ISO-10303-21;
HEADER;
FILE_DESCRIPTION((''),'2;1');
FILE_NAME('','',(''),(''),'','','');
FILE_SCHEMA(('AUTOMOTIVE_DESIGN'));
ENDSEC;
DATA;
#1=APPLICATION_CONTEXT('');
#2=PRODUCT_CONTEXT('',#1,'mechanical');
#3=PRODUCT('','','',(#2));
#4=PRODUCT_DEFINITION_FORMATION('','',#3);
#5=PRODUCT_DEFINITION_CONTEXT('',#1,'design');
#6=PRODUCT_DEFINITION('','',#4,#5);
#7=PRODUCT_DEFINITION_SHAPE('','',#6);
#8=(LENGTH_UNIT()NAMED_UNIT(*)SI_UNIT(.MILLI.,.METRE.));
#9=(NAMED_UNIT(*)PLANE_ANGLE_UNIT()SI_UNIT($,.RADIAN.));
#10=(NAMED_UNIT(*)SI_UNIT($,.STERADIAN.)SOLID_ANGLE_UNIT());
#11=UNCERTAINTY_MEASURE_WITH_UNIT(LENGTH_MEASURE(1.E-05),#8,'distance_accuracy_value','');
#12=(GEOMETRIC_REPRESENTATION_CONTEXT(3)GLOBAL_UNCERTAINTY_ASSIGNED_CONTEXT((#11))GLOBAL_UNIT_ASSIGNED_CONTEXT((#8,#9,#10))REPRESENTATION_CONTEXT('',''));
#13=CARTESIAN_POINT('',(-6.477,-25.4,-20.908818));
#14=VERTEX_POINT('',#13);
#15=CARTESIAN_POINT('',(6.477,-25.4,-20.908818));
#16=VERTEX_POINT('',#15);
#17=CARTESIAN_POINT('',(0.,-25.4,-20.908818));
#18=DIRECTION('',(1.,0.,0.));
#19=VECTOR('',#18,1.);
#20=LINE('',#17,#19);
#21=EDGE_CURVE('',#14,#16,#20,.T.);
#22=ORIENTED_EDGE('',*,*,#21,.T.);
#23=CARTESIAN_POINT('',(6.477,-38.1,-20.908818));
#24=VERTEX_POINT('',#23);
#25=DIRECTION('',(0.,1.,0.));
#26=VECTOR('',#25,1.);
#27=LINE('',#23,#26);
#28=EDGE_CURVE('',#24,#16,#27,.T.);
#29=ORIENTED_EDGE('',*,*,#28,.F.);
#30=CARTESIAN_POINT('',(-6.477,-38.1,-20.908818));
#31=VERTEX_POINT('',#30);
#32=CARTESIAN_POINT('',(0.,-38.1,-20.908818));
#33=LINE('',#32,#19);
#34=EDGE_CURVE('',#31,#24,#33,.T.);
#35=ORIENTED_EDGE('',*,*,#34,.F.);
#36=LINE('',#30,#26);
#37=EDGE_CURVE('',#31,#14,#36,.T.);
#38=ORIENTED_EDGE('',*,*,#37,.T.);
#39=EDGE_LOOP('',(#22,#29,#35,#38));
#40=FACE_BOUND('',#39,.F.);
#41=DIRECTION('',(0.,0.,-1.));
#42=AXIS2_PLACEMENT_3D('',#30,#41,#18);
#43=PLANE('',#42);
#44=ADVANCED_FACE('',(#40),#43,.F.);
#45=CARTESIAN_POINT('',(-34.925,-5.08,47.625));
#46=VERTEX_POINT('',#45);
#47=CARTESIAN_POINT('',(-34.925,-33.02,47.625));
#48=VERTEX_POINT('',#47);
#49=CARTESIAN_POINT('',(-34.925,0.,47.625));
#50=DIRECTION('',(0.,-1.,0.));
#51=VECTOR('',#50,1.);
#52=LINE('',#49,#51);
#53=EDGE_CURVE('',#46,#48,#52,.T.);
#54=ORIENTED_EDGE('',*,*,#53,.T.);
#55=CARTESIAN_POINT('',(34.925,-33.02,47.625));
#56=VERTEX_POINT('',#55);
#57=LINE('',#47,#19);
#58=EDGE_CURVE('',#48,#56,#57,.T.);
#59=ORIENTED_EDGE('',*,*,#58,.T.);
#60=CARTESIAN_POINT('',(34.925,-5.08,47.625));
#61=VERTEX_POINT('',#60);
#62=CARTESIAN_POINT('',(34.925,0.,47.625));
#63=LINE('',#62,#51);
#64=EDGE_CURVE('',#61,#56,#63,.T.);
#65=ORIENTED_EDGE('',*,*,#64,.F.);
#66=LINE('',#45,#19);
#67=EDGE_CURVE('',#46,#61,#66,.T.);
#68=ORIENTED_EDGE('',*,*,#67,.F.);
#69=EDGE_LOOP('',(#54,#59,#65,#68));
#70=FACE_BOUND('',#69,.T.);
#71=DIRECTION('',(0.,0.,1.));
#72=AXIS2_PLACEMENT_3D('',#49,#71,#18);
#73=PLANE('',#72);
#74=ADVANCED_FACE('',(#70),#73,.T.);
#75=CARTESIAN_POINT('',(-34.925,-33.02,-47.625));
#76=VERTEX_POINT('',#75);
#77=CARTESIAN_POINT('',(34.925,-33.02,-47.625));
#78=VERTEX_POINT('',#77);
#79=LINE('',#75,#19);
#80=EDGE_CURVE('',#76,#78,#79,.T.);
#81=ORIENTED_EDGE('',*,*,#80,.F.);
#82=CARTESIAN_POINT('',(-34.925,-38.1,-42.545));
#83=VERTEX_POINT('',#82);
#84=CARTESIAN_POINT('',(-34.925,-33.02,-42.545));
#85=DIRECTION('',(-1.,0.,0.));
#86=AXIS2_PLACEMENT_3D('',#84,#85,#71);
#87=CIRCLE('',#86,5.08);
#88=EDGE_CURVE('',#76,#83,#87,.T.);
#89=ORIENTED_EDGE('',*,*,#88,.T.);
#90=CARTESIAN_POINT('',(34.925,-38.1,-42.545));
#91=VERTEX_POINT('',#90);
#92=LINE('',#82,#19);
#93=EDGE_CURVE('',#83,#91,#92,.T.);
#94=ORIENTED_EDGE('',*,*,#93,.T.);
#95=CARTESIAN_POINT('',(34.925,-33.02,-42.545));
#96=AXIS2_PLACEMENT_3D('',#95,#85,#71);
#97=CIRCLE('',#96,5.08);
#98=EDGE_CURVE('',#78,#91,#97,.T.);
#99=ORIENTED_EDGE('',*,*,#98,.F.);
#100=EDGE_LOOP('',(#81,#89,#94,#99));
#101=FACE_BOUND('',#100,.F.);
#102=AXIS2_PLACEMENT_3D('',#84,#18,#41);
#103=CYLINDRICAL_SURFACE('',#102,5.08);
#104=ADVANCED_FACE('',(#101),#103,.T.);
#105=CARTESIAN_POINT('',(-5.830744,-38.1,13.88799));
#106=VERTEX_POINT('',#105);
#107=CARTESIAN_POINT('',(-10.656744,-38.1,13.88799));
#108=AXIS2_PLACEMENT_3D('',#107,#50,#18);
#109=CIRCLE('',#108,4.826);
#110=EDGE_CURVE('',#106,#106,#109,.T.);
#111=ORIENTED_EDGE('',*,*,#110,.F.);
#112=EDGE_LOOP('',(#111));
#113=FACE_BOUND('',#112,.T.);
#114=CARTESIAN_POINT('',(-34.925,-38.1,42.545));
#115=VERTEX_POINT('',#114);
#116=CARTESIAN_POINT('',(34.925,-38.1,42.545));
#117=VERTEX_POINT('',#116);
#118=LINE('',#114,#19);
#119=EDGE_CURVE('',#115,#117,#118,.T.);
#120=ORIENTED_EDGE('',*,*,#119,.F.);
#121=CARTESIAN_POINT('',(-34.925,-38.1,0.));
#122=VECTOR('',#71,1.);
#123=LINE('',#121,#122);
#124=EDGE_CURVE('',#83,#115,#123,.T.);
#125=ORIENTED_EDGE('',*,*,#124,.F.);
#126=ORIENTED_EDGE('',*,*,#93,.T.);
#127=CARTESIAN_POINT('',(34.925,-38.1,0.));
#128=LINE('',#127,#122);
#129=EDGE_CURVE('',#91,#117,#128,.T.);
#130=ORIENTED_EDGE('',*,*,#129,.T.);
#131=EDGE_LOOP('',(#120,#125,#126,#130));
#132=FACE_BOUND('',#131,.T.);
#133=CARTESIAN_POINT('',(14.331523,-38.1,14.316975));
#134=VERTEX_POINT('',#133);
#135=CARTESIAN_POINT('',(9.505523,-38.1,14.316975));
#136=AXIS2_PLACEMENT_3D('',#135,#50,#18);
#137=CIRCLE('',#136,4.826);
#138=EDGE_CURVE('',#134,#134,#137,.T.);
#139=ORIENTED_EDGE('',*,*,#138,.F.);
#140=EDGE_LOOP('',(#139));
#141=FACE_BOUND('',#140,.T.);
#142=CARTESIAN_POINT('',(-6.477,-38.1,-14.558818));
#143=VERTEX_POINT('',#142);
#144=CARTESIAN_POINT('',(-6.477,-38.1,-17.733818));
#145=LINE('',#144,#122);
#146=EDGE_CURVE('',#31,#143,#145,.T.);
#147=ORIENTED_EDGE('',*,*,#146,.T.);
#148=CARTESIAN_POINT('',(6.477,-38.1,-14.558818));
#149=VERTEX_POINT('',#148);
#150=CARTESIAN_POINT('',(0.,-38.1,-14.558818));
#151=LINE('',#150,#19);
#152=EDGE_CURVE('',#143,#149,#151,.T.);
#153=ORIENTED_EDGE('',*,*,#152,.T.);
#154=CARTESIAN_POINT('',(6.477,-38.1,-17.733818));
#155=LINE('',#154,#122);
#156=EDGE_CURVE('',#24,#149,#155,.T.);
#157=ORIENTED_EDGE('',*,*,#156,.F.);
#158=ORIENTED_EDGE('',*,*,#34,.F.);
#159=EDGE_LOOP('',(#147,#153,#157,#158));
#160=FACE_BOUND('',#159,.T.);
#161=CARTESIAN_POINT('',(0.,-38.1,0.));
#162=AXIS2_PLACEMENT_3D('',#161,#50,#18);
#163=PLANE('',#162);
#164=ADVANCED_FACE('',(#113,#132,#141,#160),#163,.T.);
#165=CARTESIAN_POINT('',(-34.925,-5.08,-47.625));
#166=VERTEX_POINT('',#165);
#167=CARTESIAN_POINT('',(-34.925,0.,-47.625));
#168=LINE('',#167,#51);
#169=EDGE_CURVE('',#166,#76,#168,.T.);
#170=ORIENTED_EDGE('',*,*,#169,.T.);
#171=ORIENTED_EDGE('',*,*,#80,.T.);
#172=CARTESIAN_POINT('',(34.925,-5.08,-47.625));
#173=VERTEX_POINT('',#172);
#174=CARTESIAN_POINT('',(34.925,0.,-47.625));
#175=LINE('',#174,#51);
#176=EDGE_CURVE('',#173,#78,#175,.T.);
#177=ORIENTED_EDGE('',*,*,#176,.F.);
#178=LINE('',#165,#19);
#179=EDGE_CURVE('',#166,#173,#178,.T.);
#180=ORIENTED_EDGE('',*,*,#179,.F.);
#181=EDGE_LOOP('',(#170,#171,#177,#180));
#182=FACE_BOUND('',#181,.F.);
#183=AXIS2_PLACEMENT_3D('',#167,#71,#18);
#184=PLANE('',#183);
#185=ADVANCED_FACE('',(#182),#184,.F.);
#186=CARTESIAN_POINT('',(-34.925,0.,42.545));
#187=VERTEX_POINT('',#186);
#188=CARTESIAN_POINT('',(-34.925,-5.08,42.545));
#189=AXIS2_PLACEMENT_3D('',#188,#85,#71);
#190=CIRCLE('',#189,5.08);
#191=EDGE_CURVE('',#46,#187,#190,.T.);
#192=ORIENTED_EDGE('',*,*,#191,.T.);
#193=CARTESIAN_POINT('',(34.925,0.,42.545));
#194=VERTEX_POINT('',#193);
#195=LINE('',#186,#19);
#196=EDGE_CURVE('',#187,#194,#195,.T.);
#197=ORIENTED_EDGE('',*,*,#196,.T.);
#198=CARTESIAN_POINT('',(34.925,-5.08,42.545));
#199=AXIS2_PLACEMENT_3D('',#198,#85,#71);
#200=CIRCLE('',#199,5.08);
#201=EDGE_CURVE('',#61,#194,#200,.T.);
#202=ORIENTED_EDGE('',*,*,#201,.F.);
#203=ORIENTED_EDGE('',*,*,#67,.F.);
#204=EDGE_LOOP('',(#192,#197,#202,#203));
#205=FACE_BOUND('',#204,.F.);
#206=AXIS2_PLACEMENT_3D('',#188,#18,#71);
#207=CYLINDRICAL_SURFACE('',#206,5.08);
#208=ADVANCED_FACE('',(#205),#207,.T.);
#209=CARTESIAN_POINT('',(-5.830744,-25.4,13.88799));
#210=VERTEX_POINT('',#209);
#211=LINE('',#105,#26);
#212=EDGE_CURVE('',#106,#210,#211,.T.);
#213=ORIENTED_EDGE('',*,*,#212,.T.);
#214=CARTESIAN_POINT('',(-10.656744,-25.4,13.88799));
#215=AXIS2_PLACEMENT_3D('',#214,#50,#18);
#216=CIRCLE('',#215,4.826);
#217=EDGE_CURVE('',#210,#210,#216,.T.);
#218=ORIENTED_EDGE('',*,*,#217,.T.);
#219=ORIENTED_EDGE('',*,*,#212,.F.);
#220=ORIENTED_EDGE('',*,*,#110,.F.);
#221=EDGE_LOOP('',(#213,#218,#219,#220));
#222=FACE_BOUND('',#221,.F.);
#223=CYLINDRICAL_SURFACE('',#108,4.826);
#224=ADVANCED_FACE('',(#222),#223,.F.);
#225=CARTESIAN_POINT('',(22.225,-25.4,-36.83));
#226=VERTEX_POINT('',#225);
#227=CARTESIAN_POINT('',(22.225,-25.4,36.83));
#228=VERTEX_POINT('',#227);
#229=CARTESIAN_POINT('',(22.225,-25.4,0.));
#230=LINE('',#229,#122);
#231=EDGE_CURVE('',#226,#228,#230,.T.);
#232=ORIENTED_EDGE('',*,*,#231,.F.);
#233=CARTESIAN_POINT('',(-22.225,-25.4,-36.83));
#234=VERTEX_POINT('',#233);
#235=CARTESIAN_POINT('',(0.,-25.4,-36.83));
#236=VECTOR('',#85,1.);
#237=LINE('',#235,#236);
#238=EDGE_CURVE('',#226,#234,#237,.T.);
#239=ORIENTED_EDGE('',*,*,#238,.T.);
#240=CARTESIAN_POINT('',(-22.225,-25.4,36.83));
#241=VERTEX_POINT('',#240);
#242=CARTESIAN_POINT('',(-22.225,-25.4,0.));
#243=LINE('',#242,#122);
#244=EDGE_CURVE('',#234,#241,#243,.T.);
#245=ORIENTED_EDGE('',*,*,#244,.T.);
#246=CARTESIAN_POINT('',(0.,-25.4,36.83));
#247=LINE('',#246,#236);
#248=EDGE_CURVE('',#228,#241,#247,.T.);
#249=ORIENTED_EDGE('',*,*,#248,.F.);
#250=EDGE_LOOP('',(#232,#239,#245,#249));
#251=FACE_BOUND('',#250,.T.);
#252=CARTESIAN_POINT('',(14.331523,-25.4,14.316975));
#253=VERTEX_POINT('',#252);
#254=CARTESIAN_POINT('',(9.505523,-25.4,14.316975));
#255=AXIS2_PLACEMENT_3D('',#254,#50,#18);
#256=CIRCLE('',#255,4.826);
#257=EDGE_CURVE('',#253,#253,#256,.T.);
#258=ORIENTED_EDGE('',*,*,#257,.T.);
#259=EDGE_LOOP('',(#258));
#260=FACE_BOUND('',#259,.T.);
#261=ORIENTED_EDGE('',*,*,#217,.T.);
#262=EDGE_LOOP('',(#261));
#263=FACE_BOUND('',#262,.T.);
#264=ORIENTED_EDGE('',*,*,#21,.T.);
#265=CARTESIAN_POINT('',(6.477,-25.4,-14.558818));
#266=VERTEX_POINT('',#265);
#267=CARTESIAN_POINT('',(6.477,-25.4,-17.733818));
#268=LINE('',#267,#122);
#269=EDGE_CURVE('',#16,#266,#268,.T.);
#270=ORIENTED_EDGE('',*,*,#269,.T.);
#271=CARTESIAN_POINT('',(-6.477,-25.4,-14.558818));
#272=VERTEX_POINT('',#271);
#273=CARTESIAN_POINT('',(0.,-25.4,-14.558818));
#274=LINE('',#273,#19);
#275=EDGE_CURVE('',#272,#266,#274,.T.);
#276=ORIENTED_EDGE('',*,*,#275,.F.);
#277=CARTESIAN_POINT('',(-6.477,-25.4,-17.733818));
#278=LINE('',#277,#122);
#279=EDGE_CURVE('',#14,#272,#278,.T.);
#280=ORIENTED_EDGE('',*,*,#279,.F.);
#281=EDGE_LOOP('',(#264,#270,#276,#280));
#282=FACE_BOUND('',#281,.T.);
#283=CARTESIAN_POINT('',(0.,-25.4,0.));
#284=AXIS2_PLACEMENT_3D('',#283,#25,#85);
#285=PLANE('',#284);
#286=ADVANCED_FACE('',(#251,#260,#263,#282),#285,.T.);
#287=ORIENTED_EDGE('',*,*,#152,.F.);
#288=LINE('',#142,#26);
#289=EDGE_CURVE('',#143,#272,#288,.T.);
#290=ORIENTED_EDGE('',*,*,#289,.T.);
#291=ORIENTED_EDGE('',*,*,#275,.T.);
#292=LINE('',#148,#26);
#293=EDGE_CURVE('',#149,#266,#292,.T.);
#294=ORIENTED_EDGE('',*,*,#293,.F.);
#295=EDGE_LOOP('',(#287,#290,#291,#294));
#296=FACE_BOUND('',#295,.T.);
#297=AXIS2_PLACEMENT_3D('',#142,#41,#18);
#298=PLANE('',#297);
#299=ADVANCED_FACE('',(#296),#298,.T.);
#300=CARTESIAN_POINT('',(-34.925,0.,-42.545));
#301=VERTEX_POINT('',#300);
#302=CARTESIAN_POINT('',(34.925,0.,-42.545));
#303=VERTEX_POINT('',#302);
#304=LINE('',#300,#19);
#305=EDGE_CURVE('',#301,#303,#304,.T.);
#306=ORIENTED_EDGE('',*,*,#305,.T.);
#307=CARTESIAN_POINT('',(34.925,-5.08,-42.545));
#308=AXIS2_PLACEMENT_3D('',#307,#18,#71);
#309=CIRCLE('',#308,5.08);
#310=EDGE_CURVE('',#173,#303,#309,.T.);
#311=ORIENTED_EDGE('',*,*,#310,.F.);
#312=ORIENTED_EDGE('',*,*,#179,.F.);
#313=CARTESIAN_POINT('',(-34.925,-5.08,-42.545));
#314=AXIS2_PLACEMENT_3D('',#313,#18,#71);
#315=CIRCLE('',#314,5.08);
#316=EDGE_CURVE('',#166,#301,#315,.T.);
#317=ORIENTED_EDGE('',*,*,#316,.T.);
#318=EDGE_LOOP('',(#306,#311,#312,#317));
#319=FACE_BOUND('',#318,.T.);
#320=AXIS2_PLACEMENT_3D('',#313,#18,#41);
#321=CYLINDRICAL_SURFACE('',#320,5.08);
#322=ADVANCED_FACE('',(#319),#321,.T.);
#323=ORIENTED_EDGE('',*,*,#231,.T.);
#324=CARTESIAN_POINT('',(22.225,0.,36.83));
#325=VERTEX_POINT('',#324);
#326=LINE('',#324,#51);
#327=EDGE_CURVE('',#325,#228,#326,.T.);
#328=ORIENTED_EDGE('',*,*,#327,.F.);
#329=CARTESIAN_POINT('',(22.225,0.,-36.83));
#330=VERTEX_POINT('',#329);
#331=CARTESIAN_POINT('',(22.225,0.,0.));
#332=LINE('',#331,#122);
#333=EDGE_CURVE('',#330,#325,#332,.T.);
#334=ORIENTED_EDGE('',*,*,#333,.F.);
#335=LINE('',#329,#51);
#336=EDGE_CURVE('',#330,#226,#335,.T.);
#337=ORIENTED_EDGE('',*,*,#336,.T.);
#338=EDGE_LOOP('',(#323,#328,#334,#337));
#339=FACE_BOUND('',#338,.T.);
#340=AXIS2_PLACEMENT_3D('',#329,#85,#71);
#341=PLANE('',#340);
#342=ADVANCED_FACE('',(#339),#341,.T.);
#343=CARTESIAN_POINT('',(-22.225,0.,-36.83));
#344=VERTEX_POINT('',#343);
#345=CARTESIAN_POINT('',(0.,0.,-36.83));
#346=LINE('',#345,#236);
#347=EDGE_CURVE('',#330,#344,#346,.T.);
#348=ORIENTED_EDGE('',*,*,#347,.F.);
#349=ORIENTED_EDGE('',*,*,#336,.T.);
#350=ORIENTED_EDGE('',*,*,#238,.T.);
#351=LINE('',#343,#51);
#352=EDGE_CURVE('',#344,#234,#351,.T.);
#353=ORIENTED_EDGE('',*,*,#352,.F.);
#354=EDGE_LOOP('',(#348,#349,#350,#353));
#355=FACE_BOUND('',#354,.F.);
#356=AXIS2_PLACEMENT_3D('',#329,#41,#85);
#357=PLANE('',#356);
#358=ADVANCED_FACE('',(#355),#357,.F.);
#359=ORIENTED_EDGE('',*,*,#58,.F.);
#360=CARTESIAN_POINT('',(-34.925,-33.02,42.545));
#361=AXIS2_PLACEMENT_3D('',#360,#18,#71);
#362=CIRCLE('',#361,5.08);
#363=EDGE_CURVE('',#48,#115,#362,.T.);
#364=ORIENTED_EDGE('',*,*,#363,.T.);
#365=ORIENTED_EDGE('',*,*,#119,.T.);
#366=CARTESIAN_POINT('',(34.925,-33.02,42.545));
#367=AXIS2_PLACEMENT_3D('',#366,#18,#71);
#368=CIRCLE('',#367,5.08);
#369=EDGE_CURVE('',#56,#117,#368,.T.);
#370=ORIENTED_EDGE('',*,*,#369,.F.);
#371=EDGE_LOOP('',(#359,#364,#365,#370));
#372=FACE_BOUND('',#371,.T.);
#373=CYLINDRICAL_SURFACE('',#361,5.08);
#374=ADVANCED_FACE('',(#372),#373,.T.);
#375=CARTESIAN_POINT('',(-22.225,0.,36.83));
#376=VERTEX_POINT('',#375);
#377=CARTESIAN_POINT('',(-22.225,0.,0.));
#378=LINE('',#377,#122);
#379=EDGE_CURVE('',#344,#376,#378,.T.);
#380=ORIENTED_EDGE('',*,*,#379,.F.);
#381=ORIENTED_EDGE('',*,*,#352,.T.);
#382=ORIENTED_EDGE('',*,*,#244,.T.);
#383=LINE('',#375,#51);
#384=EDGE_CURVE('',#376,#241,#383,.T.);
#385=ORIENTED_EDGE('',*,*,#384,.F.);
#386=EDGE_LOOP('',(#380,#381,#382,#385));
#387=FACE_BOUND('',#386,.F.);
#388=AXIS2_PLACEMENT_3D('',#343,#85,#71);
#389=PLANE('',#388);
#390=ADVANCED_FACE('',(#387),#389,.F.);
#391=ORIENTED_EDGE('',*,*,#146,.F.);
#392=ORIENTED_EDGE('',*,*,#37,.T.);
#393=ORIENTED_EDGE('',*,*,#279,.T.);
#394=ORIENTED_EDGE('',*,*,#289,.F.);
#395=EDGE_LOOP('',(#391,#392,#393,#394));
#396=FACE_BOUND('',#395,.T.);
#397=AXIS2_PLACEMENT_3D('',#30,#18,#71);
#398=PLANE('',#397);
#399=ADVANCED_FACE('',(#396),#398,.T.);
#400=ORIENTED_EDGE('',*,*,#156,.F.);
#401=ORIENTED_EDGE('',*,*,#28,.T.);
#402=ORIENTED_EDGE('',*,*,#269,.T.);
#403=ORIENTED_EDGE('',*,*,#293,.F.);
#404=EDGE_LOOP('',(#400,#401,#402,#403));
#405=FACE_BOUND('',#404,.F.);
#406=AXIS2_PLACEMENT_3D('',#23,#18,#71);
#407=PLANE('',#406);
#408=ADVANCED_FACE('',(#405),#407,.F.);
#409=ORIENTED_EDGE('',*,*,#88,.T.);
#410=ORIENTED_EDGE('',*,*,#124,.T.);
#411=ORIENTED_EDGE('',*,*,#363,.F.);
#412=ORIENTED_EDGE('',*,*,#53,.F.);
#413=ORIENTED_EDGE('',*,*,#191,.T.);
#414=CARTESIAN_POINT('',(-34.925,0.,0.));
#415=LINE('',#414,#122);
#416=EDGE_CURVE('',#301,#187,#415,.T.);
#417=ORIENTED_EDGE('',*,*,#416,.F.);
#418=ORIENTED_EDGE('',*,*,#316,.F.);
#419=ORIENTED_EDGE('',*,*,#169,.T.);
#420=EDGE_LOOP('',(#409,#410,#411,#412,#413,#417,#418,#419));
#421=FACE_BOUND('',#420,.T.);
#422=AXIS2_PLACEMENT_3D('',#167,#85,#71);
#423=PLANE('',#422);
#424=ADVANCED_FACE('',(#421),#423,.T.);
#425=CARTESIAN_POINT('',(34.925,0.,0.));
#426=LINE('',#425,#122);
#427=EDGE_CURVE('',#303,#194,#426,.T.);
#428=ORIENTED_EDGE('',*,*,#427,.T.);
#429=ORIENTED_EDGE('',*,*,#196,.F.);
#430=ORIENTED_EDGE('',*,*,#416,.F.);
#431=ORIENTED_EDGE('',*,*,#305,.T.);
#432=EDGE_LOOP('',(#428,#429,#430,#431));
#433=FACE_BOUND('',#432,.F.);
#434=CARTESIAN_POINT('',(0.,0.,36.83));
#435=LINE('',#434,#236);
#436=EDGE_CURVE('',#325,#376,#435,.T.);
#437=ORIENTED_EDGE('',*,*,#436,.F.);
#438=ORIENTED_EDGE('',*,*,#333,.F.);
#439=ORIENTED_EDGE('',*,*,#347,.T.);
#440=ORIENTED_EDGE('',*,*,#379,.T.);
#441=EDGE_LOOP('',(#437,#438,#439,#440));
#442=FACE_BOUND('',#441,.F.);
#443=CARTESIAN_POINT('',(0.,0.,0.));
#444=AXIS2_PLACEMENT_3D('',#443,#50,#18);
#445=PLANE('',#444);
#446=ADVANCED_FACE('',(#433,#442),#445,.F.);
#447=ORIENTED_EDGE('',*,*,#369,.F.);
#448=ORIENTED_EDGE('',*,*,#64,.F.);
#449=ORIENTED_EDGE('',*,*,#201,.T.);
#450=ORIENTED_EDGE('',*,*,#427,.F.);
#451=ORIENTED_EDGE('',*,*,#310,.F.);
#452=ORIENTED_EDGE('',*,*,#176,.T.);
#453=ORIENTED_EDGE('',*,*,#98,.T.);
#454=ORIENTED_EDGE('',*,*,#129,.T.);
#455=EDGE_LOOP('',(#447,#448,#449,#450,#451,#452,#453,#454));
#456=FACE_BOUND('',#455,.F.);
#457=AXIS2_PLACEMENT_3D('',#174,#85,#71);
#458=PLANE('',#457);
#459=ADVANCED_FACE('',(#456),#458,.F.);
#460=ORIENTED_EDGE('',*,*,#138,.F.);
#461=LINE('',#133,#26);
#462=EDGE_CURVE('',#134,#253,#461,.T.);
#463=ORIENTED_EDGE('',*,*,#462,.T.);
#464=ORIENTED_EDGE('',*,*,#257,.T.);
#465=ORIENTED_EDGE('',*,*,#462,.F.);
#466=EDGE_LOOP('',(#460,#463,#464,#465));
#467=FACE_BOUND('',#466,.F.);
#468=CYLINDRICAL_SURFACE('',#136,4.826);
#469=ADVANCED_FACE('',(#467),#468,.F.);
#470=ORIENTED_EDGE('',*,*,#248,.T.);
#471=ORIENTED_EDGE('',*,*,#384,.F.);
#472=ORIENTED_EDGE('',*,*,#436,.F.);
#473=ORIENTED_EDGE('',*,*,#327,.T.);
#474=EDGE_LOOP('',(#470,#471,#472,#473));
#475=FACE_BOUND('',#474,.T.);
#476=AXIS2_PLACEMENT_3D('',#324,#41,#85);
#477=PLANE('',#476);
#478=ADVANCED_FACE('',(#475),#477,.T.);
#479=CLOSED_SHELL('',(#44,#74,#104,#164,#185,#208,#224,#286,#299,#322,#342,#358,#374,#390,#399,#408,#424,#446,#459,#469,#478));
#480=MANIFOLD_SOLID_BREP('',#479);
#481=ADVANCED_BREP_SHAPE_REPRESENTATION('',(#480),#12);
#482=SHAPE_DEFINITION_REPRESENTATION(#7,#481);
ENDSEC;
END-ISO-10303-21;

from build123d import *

# Parameters (mm, degrees)
F0_W     = 69.85
F0_H     = 95.25
F1_DEPTH = 38.1
F2_W     = 44.45
F2_H     = 73.66
F3_DEPTH = 25.4
F4_R     = 5.08
F5_R     = 4.826
F6_DEPTH = 12.7
F7_W     = 12.954
F7_H     = 6.35
F8_DEPTH = 12.7


# Not quite as in the source:
# - a feature names something its author has since deleted; it is built from what else it names


with BuildPart() as f1:
    # F0 (on Front) → F1 (new body)
    with BuildSketch(Plane.XZ):
        Rectangle(F0_W, F0_H)
    extrude(amount=F1_DEPTH)

    # F2 (on face) → F3 (cut)
    with BuildSketch(Plane(origin=(0, 0, 0), x_dir=(-1, 0, 0), z_dir=(0, 1, 0))):
        Rectangle(F2_W, F2_H)
    extrude(amount=-F3_DEPTH, mode=Mode.SUBTRACT)

    # F4
    f4_edges = [f1.edges().sort_by_distance(p)[0] for p in [
        (0, -38.1, 47.625),
        (0, 0, 47.625),
        (0, -38.1, -47.625),
        (0, 0, -47.625),
    ]]
    fillet(f4_edges, radius=F4_R)

    # F5 (on face) → F6 (cut)
    with BuildSketch(Plane.XZ.offset(38.1)):
        with Locations((-10.6567444081, 13.887990205)):
            Circle(F5_R)
        with Locations((9.5055226038, 14.3169752002)):
            Circle(F5_R)
    extrude(amount=-F6_DEPTH, mode=Mode.SUBTRACT)

    # F7 (on face) → F8 (cut)
    with BuildSketch(Plane.XZ.offset(38.1)):
        with Locations((0, -17.7338177471)):
            Rectangle(F7_W, F7_H)
    extrude(amount=-F8_DEPTH, mode=Mode.SUBTRACT)


solid = f1.part
